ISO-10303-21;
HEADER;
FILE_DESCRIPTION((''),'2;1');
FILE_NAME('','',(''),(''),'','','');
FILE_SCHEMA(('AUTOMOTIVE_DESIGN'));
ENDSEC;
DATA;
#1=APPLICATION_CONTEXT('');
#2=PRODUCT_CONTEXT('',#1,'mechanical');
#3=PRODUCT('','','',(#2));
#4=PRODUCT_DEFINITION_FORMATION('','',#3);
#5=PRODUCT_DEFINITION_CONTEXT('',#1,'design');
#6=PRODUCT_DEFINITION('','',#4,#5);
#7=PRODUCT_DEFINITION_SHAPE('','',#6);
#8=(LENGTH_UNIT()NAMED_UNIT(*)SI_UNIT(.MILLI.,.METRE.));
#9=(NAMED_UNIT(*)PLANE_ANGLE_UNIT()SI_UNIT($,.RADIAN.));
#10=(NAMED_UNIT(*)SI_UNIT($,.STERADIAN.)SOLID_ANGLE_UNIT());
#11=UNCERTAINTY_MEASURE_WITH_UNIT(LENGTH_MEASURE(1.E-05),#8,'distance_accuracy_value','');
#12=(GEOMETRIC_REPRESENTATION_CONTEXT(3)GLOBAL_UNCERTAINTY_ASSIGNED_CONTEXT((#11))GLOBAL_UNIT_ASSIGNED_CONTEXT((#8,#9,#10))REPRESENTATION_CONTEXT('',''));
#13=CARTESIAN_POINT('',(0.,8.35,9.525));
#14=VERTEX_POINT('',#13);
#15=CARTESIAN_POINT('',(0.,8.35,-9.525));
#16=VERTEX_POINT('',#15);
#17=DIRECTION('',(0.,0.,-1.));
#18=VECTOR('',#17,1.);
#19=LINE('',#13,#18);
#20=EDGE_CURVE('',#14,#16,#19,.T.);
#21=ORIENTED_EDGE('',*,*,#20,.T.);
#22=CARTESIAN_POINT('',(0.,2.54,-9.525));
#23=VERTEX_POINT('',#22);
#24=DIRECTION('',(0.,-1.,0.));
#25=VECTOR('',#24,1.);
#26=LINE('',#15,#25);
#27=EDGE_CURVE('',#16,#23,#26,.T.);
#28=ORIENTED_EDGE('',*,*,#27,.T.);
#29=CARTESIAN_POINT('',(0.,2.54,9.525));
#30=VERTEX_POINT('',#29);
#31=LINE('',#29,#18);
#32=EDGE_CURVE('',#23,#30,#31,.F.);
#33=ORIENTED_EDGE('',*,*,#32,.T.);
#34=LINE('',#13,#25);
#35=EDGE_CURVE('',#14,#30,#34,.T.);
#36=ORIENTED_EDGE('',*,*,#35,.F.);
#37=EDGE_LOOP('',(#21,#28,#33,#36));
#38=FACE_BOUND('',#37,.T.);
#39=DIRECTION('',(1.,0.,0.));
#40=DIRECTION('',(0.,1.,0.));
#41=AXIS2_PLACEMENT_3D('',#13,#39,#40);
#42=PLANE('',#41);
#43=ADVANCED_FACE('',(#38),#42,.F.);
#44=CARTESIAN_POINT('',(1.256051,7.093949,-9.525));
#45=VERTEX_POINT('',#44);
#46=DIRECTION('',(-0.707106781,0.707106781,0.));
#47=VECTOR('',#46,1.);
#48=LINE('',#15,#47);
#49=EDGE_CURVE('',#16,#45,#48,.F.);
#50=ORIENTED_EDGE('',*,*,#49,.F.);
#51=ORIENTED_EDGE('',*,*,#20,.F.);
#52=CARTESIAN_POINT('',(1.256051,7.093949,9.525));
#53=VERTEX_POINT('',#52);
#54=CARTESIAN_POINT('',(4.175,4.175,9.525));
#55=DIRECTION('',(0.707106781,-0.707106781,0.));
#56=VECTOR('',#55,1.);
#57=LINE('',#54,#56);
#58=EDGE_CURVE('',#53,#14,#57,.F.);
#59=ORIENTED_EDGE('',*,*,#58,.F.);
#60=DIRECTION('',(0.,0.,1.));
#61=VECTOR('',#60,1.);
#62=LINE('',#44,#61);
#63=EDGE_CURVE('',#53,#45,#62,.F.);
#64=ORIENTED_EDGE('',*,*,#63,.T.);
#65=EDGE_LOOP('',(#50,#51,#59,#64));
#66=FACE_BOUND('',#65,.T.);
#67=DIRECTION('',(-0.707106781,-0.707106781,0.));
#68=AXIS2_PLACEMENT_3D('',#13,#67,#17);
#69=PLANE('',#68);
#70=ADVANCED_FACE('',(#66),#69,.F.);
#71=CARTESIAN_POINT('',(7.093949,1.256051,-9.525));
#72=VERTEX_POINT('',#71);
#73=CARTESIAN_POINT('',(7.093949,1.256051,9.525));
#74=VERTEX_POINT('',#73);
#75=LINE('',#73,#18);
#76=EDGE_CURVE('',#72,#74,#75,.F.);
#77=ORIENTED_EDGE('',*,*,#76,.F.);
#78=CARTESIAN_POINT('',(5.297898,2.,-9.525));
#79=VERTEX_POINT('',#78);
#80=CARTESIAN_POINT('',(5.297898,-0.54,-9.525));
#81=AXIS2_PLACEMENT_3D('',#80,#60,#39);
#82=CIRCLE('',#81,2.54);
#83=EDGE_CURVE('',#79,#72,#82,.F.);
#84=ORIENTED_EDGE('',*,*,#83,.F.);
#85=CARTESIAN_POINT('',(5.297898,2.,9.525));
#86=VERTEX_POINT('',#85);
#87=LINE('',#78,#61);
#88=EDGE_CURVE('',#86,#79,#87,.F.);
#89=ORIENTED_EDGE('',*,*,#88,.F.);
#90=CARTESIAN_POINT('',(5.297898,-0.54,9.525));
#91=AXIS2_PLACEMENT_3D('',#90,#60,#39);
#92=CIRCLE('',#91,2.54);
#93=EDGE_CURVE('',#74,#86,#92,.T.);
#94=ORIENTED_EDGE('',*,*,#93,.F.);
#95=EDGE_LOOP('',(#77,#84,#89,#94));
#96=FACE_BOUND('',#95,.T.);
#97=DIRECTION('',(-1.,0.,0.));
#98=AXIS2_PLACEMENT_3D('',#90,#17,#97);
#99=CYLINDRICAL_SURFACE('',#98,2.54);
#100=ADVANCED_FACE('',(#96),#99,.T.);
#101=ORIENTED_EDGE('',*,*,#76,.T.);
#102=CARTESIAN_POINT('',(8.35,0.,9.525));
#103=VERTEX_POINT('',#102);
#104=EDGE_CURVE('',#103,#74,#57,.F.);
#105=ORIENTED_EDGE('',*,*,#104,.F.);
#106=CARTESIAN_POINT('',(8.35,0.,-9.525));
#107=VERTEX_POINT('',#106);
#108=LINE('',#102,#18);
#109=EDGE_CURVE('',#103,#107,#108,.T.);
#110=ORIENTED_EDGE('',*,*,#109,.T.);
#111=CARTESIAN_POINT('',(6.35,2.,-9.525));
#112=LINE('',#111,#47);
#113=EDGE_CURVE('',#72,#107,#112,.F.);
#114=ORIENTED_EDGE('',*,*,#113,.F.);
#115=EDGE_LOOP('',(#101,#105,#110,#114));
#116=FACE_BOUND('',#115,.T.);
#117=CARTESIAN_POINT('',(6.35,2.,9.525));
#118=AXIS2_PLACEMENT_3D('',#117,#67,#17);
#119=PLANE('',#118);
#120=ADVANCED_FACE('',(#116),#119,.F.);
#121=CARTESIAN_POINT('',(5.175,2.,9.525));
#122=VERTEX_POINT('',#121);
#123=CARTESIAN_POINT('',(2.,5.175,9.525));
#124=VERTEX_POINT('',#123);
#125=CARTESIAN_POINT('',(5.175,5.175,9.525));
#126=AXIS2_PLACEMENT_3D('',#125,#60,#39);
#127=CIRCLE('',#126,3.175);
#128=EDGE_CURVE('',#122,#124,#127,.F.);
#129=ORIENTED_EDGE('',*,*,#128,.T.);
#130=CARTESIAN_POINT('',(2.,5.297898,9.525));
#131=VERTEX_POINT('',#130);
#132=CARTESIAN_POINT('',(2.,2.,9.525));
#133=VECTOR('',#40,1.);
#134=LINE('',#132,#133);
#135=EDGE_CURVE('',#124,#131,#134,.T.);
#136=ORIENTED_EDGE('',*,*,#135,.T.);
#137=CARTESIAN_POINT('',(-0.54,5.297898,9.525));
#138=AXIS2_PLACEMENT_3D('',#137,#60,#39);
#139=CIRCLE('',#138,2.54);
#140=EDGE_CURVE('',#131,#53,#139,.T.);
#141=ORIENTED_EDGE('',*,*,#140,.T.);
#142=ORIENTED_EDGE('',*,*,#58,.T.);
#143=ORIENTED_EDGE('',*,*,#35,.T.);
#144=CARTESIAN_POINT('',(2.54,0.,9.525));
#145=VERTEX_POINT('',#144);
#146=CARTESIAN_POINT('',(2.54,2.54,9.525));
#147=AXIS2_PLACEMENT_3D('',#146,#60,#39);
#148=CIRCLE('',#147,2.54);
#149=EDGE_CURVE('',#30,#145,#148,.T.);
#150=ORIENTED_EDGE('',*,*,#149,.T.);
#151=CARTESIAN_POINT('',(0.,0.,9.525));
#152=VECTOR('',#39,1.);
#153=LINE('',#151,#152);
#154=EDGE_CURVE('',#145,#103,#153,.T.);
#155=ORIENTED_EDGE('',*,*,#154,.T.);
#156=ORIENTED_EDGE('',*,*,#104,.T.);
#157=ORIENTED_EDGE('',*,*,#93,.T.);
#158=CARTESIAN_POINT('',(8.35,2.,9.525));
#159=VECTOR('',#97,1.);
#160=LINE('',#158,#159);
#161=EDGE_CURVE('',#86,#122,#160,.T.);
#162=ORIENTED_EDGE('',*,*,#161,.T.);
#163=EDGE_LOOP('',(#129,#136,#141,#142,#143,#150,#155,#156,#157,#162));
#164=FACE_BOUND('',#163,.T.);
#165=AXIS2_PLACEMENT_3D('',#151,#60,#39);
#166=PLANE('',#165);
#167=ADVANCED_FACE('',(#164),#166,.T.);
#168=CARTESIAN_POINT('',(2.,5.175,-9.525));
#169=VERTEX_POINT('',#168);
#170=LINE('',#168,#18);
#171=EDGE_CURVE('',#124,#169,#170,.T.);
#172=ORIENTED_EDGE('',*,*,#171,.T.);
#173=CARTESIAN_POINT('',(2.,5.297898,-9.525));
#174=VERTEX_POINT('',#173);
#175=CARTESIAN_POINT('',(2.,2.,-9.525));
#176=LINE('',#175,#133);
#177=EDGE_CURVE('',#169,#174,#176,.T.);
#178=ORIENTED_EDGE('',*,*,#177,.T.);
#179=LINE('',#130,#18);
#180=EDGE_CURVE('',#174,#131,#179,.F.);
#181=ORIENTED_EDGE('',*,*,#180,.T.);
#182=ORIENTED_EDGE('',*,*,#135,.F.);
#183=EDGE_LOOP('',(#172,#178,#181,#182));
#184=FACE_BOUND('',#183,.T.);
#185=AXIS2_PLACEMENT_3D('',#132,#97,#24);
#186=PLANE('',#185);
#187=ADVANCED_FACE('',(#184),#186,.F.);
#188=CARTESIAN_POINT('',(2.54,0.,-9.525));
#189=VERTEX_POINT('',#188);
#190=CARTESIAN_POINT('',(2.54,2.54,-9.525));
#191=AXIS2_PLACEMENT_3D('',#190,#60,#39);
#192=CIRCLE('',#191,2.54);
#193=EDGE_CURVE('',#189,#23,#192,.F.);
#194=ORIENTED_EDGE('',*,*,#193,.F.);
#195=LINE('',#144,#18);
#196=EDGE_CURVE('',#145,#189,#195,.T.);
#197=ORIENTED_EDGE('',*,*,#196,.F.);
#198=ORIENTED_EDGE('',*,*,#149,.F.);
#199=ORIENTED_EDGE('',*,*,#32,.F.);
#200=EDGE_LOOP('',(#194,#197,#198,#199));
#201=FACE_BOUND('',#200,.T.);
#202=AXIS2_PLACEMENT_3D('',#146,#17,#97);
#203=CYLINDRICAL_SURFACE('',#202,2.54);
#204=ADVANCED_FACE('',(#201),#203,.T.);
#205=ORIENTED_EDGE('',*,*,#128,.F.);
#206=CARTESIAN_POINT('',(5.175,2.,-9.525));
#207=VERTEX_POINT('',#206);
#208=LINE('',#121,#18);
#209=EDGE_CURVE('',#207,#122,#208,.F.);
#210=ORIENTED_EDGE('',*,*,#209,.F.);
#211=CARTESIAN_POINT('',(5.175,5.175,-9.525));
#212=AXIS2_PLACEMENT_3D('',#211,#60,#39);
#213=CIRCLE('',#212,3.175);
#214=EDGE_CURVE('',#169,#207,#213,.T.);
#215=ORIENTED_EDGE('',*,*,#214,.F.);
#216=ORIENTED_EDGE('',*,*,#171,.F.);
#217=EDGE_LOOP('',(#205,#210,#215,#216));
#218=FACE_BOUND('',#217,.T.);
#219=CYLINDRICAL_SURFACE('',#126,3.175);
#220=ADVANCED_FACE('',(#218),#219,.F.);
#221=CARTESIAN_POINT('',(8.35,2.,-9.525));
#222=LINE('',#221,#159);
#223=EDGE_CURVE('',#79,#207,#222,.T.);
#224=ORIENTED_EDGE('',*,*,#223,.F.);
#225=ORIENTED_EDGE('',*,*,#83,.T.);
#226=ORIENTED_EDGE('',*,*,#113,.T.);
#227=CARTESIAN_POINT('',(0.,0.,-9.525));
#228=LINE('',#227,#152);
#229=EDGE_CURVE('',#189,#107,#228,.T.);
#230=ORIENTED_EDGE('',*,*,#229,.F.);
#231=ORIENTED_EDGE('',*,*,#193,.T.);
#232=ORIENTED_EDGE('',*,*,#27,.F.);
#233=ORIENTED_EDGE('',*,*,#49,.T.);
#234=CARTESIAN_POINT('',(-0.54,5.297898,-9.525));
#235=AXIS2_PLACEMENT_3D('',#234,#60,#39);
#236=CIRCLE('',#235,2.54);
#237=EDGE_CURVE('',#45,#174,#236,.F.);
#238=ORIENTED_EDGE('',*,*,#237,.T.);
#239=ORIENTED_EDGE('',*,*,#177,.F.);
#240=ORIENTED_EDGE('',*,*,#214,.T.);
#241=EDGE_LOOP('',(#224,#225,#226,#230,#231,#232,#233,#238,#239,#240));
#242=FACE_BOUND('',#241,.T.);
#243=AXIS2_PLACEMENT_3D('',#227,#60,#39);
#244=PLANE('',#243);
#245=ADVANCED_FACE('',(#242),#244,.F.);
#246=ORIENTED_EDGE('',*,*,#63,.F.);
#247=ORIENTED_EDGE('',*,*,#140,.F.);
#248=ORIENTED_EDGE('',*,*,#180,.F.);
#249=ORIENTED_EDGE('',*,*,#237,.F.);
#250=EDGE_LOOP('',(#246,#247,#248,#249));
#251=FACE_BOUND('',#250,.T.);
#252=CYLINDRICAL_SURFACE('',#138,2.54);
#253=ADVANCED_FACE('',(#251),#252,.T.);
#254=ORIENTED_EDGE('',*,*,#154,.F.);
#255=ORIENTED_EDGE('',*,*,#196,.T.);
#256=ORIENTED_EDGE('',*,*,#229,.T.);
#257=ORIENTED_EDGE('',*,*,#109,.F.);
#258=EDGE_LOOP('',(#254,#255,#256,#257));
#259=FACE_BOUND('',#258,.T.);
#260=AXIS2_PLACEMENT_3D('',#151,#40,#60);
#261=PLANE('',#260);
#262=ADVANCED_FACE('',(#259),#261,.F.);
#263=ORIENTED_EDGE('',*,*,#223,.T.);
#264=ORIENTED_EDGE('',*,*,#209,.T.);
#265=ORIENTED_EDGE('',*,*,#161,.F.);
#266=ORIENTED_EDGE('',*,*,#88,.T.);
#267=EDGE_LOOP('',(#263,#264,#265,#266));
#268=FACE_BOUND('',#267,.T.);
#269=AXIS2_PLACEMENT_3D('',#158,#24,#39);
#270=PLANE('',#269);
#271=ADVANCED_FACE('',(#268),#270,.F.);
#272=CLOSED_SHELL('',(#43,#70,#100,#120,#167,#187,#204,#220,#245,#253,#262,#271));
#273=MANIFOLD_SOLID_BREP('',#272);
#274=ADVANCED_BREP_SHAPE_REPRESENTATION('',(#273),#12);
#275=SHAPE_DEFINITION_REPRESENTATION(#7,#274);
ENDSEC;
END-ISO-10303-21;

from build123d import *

# Parameters (mm, degrees)
BOSS_EXTRUDE1_DEPTH = 9.525
CHAMFER1_SIZE       = 2
FILLET1_R           = 2.54
FILLET2_R           = 2.54
FILLET3_R           = 3.175


with BuildPart() as part:
    # Sketch1 → Boss-Extrude1 (new, symmetric)
    with BuildSketch(Plane.XY):
        Polygon((0, 0), (8.35, 0), (8.35, 2), (2, 2), (2, 8.35), (0, 8.35), align=None)
    extrude(amount=BOSS_EXTRUDE1_DEPTH, both=True)

    # Chamfer1
    chamfer1_edges = [part.edges().sort_by_distance(p)[0] for p in [
        (8.35, 2, 0),
        (2, 8.35, 0),
    ]]
    chamfer(chamfer1_edges, length=CHAMFER1_SIZE - 0.0001)  # a hair under: the kernel refuses the full size

    # Fillet1
    fillet1_edges = [part.edges().sort_by_distance(p)[0] for p in [
        (6.3501, 2, 0),
        (2, 6.3501, 0),
    ]]
    fillet(fillet1_edges, radius=FILLET1_R)

    # Fillet2
    fillet2_edges = [part.edges().sort_by_distance(p)[0] for p in [
        (0, 0, 0),
    ]]
    fillet(fillet2_edges, radius=FILLET2_R)

    # Fillet3
    fillet3_edges = [part.edges().sort_by_distance(p)[0] for p in [
        (2, 2, 0),
    ]]
    fillet(fillet3_edges, radius=FILLET3_R)


solid = part.part
